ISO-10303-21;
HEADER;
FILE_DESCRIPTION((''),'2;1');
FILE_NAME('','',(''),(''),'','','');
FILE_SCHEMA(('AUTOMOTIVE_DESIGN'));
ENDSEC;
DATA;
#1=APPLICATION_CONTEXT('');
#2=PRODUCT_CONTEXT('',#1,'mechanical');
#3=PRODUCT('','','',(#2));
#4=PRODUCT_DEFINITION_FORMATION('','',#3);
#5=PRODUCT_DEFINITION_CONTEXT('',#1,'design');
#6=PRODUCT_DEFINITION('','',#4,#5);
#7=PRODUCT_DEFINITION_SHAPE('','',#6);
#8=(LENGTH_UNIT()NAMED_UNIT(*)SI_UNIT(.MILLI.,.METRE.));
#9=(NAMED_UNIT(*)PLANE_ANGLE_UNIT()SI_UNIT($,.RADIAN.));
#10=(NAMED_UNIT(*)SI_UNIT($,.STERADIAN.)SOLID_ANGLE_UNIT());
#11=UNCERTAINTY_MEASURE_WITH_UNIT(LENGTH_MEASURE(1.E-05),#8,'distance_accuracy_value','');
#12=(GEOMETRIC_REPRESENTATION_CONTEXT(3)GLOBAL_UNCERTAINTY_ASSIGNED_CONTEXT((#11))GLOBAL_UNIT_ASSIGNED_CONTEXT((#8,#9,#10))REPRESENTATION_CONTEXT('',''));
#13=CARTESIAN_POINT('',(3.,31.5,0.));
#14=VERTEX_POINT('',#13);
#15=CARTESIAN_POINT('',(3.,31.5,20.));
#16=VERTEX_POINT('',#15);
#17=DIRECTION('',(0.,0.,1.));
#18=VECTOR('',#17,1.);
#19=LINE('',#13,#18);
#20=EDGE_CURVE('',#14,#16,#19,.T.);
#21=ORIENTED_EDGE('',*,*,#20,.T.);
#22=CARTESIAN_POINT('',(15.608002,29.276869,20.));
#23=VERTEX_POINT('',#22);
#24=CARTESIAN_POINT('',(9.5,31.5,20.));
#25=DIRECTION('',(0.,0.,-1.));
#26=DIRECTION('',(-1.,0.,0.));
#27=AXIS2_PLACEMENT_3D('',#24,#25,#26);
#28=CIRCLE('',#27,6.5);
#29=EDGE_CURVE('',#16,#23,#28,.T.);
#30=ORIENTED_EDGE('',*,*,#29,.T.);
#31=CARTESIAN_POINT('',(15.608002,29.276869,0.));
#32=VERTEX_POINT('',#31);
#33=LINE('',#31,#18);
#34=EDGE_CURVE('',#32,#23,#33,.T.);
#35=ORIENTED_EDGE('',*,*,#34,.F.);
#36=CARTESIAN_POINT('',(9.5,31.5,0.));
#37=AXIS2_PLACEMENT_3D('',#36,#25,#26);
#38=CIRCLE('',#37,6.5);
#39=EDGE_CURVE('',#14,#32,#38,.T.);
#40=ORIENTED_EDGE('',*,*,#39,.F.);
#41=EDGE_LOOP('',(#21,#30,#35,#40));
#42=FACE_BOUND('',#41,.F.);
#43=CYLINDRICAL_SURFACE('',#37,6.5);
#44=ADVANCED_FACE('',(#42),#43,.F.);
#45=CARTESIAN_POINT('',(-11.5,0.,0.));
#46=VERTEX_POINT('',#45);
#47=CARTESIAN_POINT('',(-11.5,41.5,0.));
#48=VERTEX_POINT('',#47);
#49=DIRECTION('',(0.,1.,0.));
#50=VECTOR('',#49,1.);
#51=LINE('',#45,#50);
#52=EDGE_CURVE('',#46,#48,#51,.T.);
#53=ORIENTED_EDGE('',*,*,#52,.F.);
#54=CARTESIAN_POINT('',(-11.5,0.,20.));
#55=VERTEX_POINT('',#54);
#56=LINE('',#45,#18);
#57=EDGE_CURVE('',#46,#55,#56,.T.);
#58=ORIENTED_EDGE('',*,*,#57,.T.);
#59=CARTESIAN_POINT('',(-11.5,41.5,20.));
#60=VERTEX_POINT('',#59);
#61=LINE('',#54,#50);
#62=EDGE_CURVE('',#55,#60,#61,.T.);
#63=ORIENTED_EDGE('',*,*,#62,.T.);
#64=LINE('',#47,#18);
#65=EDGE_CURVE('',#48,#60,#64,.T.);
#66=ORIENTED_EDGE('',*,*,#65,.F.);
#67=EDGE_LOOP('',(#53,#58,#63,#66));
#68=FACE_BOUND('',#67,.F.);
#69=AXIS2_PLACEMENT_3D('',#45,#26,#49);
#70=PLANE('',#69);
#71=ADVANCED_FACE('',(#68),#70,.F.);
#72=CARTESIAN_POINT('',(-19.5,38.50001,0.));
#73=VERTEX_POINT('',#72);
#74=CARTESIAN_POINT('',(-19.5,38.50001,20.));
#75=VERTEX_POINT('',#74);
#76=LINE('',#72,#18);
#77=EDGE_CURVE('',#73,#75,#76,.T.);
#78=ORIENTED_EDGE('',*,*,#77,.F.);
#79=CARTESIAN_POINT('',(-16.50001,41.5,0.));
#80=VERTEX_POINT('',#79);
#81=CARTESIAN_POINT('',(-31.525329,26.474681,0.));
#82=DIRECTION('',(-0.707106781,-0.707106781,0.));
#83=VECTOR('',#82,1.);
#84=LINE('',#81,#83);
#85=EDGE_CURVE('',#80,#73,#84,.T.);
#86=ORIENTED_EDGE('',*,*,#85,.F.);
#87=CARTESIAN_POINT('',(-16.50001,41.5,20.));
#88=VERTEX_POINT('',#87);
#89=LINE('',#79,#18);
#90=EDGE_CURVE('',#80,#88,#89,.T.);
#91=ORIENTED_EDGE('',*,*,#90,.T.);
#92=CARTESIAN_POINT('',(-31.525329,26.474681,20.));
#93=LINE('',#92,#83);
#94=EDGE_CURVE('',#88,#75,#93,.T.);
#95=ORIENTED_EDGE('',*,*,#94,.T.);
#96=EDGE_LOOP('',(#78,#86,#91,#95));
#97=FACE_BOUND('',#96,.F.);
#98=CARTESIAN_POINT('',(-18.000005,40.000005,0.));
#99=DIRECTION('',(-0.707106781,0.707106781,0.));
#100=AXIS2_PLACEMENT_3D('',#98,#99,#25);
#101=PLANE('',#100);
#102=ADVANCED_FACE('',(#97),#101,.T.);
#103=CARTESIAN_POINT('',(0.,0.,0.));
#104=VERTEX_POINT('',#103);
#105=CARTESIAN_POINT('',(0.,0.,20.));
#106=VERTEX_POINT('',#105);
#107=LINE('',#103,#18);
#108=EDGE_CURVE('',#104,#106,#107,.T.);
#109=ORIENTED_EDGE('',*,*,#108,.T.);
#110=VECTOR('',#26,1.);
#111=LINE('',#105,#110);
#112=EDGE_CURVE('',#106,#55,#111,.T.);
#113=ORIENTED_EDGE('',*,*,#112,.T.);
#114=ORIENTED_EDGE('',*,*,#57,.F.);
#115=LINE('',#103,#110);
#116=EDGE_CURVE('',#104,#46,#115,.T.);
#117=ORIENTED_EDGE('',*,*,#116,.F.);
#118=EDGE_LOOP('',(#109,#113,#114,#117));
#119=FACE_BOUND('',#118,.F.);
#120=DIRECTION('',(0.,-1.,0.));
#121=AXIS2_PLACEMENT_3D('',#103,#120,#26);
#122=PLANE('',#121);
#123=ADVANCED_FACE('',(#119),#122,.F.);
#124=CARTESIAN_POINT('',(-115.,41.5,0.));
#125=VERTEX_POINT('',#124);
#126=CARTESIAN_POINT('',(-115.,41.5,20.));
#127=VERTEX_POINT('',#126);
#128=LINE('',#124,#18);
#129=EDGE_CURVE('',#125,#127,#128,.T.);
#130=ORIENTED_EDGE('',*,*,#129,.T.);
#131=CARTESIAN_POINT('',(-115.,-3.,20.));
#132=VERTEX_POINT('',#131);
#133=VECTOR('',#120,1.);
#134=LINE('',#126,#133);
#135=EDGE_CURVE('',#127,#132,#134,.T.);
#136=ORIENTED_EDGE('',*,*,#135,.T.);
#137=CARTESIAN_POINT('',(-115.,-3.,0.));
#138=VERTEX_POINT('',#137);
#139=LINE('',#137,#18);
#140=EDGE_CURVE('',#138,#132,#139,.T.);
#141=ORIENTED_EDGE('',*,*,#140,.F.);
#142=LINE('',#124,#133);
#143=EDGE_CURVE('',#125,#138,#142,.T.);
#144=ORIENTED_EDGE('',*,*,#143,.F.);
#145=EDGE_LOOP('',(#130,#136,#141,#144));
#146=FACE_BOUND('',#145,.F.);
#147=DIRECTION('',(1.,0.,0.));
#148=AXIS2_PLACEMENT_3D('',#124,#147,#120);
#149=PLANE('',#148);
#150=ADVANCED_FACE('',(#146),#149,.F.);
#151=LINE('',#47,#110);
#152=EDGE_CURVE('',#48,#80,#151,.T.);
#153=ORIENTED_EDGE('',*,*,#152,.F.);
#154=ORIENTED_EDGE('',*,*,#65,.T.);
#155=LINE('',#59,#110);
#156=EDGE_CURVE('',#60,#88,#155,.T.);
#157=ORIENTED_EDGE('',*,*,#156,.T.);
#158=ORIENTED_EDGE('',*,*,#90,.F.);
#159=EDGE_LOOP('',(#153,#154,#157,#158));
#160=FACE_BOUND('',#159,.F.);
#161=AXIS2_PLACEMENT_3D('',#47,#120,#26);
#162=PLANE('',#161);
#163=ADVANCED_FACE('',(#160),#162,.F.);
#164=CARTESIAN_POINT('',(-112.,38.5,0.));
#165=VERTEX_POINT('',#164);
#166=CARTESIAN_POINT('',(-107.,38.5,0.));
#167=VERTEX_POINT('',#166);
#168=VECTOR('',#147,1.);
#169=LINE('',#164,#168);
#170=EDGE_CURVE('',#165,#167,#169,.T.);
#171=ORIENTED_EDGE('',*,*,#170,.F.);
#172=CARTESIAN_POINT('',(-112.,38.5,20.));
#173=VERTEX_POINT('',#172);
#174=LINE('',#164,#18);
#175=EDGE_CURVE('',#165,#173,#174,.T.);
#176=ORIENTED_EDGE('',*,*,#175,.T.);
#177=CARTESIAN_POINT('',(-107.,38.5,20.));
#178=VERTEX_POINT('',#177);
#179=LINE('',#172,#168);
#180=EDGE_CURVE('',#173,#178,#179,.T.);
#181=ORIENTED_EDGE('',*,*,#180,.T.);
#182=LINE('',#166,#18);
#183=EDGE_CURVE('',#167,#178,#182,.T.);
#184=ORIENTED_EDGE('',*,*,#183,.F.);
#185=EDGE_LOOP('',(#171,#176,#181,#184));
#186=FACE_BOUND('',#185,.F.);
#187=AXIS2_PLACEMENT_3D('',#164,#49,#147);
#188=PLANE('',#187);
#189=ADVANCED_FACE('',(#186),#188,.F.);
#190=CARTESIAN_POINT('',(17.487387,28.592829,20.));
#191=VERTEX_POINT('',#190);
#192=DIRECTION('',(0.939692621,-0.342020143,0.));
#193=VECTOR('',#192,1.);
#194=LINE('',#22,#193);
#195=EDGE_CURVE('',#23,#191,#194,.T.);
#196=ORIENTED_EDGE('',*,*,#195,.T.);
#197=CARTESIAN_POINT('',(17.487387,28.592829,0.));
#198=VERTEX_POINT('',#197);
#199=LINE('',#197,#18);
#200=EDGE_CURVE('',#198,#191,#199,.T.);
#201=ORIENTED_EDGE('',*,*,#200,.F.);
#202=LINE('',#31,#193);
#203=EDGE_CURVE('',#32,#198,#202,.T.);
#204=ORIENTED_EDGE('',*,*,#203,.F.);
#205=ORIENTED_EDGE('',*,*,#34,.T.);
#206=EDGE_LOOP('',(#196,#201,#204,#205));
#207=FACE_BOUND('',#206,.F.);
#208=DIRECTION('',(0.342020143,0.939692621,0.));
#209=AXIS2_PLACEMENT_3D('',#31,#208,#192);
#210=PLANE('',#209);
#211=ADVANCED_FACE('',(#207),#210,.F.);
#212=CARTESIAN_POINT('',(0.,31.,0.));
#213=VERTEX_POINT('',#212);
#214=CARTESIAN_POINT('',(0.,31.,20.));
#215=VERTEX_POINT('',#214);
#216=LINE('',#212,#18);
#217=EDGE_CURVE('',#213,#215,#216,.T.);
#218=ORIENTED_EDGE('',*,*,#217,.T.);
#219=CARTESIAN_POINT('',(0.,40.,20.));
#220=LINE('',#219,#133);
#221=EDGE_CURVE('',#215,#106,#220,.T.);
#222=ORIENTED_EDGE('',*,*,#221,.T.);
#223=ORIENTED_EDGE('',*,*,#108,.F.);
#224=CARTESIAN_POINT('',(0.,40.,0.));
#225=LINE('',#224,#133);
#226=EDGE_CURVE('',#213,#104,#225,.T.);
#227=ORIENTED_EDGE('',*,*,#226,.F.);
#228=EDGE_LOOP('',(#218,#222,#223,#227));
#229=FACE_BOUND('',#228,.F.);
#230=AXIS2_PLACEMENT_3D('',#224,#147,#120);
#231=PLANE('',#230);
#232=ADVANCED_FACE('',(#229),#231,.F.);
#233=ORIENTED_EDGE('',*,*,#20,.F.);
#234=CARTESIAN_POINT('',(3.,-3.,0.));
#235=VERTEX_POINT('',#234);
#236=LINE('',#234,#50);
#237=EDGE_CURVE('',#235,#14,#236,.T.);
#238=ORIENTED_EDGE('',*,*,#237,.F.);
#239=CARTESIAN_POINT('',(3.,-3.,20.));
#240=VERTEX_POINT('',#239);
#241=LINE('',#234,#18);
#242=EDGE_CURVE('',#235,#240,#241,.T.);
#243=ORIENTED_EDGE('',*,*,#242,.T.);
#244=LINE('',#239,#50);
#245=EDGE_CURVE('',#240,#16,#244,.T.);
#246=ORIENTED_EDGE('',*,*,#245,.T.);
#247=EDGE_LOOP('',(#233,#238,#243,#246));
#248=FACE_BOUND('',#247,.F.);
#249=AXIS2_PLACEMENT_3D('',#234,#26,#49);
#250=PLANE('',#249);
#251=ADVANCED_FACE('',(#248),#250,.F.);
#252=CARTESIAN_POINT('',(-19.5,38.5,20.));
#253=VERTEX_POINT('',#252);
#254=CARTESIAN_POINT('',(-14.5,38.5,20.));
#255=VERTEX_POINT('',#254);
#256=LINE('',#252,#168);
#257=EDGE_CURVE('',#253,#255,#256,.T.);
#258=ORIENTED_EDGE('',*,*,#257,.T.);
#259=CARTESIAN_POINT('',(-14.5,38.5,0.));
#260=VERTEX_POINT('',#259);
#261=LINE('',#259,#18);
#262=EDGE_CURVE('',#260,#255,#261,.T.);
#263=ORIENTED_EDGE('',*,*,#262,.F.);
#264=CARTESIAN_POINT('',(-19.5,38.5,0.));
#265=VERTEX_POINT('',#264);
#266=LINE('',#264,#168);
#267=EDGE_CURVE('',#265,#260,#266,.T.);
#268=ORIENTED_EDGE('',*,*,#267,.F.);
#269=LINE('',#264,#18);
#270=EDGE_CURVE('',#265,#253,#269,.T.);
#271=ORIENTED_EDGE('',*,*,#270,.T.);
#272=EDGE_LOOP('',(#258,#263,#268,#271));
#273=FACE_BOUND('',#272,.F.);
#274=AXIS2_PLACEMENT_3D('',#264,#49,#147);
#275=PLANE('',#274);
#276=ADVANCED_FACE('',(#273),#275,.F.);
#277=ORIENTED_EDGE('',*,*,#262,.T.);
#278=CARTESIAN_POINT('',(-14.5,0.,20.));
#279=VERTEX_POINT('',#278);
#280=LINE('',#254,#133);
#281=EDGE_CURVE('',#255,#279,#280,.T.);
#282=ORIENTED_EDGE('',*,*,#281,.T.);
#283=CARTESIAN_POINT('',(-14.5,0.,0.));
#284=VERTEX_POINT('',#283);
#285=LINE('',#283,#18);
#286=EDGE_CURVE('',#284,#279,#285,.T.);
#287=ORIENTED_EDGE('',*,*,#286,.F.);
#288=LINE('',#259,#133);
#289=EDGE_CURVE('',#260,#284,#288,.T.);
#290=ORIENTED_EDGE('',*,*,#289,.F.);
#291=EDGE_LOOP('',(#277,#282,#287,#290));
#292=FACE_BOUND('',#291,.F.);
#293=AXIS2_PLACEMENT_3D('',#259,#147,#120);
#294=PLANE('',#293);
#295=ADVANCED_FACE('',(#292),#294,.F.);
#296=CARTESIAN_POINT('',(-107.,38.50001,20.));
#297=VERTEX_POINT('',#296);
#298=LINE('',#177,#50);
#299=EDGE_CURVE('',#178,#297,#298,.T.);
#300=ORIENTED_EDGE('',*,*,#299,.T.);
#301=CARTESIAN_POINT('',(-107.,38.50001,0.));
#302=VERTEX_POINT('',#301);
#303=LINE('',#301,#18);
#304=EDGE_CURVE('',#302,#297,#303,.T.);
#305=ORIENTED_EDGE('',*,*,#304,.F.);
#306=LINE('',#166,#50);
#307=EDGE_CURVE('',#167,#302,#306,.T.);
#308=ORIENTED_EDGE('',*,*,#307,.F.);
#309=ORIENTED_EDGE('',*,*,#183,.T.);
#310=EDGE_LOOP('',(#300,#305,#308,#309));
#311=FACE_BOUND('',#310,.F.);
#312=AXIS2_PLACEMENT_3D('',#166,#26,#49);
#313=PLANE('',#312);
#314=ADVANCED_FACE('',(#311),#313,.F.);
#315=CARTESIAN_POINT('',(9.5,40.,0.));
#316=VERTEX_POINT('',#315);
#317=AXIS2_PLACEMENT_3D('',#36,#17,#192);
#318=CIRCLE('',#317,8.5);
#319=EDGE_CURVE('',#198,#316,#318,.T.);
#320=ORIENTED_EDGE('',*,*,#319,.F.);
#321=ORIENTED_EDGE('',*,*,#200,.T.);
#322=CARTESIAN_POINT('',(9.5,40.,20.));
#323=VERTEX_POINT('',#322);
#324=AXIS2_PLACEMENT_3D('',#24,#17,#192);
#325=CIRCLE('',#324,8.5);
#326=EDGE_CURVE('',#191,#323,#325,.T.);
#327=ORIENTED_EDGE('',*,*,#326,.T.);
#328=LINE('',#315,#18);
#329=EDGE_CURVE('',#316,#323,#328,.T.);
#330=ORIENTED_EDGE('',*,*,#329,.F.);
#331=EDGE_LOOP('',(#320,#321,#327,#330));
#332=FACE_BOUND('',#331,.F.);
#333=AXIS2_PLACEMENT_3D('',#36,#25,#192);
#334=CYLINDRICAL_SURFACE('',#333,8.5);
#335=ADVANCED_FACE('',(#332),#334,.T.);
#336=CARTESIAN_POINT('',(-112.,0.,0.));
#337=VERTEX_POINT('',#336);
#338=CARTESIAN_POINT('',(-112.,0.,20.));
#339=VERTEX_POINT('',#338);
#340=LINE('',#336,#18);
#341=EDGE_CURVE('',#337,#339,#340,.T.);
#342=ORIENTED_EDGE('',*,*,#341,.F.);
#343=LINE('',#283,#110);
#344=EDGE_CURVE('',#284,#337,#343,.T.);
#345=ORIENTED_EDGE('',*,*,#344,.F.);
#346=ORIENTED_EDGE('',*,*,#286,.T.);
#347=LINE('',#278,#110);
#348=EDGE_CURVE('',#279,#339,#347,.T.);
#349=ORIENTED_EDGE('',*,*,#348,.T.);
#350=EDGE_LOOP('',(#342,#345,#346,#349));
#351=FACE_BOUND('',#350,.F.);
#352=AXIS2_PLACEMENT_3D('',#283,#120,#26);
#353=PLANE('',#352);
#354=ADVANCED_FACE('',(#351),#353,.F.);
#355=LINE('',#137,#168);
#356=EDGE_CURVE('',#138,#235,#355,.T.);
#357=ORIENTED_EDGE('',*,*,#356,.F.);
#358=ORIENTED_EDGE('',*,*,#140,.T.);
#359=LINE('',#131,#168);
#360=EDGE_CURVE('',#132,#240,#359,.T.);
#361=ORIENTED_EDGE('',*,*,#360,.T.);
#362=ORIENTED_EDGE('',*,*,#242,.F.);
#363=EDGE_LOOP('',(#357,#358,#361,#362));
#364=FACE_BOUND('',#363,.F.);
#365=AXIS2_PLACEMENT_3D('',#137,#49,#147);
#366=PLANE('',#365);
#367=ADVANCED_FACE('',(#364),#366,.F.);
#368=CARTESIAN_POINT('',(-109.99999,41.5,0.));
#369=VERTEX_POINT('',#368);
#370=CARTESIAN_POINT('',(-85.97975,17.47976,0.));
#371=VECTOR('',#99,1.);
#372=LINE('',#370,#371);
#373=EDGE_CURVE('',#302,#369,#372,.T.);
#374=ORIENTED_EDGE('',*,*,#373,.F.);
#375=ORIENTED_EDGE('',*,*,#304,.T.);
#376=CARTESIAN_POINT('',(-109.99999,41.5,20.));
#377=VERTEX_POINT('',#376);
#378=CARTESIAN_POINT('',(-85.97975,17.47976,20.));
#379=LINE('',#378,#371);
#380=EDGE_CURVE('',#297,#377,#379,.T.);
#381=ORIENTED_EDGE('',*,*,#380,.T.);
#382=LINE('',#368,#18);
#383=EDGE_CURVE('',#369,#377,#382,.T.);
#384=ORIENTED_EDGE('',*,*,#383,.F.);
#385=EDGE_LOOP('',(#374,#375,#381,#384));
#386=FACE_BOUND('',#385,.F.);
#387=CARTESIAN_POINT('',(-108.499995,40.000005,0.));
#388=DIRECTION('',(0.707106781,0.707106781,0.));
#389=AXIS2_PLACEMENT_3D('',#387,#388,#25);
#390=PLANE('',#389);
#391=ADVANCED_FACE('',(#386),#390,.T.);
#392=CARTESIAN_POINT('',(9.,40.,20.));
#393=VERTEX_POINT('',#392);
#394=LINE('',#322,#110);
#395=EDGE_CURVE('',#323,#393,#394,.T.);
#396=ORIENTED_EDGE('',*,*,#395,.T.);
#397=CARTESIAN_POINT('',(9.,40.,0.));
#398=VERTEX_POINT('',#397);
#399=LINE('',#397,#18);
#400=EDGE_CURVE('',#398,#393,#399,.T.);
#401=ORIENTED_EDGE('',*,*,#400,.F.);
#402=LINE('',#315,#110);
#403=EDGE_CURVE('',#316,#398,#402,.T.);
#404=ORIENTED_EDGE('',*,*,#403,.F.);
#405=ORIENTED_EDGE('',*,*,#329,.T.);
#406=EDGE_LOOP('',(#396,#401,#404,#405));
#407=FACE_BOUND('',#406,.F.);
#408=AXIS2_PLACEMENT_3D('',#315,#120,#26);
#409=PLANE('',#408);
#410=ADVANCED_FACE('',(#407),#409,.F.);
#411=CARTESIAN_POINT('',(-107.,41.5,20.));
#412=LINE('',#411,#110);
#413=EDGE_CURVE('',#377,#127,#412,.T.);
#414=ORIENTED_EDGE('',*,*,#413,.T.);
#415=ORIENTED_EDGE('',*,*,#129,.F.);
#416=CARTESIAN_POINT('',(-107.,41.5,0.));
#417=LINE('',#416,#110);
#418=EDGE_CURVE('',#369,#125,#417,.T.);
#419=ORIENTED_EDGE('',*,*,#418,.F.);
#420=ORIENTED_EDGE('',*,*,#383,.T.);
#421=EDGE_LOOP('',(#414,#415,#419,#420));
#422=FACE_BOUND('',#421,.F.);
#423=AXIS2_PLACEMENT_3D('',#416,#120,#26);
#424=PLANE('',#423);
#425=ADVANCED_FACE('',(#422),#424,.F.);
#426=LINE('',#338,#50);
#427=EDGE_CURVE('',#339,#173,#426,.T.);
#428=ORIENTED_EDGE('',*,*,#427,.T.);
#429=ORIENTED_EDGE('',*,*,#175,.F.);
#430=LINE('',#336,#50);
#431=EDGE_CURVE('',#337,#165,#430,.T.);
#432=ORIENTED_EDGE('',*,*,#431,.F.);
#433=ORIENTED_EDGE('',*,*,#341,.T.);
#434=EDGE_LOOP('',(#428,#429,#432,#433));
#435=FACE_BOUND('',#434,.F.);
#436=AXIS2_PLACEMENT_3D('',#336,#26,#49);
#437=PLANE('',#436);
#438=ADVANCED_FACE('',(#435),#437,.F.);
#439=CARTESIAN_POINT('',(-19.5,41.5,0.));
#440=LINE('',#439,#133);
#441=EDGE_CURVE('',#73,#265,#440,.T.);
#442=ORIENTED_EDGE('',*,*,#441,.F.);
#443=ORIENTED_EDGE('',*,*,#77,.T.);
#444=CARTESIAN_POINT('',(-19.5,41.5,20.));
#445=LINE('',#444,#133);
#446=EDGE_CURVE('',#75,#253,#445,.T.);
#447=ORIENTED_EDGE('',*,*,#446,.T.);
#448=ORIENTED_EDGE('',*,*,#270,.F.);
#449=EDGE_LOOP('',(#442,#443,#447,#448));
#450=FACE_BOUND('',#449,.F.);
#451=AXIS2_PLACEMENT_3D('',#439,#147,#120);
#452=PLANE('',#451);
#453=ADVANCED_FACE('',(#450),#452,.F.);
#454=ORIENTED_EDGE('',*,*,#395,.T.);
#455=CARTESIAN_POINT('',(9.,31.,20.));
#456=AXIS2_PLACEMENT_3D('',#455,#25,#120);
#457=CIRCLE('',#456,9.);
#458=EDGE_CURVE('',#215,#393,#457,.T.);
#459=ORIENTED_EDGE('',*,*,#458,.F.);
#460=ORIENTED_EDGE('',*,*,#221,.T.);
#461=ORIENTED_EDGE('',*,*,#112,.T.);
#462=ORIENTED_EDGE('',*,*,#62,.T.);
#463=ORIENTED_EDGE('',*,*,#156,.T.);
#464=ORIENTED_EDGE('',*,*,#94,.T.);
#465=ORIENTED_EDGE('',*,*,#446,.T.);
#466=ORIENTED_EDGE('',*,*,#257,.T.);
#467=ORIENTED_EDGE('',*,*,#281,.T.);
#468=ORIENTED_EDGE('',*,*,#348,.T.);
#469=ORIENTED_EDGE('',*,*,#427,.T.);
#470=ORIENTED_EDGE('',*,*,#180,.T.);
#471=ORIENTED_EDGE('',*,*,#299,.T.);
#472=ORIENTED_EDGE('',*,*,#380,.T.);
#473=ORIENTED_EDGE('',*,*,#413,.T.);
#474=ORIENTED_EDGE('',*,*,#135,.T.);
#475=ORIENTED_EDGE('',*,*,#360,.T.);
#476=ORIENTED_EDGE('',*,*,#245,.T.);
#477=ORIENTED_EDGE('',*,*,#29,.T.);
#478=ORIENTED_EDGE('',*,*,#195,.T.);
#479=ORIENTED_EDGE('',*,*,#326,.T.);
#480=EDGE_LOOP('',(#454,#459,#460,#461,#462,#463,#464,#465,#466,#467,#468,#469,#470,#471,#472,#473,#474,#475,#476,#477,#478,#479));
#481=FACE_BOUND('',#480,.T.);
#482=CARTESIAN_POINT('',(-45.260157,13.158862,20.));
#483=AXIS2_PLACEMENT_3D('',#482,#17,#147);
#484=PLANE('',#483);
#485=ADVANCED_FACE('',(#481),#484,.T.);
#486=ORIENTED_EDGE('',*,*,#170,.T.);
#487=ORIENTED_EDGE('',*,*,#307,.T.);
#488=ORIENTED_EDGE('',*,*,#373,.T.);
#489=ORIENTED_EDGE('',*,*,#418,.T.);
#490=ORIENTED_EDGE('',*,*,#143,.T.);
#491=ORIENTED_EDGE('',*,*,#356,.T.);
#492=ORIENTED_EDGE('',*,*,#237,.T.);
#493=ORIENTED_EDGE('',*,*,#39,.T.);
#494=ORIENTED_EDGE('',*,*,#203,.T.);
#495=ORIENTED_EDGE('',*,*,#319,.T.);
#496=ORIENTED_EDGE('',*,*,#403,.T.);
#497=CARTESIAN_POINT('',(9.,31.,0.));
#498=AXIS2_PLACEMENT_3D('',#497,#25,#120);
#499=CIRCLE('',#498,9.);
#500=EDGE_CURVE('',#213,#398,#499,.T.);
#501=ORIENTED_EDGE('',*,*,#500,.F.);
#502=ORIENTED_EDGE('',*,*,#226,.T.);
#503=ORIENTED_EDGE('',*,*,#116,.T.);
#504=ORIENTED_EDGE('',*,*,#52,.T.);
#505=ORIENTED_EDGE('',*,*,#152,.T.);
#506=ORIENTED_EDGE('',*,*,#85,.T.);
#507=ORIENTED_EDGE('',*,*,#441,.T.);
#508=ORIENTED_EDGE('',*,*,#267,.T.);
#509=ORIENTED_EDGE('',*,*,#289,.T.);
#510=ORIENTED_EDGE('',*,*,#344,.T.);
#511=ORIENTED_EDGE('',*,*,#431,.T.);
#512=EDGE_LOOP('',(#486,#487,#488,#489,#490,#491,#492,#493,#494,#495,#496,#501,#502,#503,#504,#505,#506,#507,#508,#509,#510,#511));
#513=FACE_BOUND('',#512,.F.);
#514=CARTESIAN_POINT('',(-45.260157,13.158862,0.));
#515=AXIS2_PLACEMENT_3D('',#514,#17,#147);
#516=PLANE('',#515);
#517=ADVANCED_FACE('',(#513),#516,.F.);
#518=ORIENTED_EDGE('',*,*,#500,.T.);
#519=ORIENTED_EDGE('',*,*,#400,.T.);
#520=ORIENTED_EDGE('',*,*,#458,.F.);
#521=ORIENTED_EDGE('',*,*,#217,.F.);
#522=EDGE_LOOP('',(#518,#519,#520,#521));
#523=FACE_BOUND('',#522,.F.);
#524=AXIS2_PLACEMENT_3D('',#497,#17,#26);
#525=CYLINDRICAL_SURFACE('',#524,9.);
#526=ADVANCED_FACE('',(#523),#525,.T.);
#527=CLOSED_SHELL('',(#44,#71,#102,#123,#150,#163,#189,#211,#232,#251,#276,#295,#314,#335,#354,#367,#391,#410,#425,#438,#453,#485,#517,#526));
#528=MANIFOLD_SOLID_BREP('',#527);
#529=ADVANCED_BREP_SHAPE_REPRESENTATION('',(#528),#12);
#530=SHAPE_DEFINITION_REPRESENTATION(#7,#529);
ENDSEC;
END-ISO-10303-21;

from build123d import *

# Parameters (mm, degrees)
F1_DEPTH = 20
F2_SIZE  = 2.99999
F3_R     = 9


# Not quite as in the source:
# - a fillet or chamfer is up to 0.001 mm smaller than in the source, because OpenCascade refuses the exact size


with BuildPart() as f1:
    # F0 (on Top) → F1 (new body)
    with BuildSketch(Plane.XY):
        with BuildLine():
            Line((0, 40), (0, 0))
            Line((0, 0), (-11.5, 0))
            Line((-11.5, 0), (-11.5, 41.5))
            Line((-11.5, 41.5), (-19.5, 41.5))
            Line((-19.5, 41.5), (-19.5, 38.5))
            Line((-19.5, 38.5), (-14.5, 38.5))
            Line((-14.5, 38.5), (-14.5, 0))
            Line((-14.5, 0), (-112, 0))
            Line((-112, 0), (-112, 38.5))
            Line((-112, 38.5), (-107, 38.5))
            Line((-107, 38.5), (-107, 41.5))
            Line((-107, 41.5), (-115, 41.5))
            Line((-115, 41.5), (-115, -3))
            Line((-115, -3), (3, -3))
            Line((3, -3), (3, 31.5))
            ThreePointArc((3, 31.5), (10.6287131548, 37.9012503946), (15.6080020351, 29.2768690684))
            Line((15.6080020351, 29.2768690684), (17.4873872767, 28.5928287817))
            ThreePointArc((17.4873872767, 28.5928287817), (16.4627923765, 36.375399709), (9.5, 40))
            Line((9.5, 40), (3, 40))
            Line((3, 40), (0, 40))
        make_face()
    extrude(amount=F1_DEPTH)

    # F2 (size 3 in the source; OpenCascade refuses exactly that, so slightly less here)
    f2_edges = [f1.edges().sort_by_distance(p)[0] for p in [
        (-107, 41.5, 10),
        (-19.5, 41.5, 10),
    ]]
    chamfer(f2_edges, length=F2_SIZE)

    # F3
    f3_edges = [f1.edges().sort_by_distance(p)[0] for p in [
        (0, 40, 10),
    ]]
    fillet(f3_edges, radius=F3_R)


solid = f1.part
